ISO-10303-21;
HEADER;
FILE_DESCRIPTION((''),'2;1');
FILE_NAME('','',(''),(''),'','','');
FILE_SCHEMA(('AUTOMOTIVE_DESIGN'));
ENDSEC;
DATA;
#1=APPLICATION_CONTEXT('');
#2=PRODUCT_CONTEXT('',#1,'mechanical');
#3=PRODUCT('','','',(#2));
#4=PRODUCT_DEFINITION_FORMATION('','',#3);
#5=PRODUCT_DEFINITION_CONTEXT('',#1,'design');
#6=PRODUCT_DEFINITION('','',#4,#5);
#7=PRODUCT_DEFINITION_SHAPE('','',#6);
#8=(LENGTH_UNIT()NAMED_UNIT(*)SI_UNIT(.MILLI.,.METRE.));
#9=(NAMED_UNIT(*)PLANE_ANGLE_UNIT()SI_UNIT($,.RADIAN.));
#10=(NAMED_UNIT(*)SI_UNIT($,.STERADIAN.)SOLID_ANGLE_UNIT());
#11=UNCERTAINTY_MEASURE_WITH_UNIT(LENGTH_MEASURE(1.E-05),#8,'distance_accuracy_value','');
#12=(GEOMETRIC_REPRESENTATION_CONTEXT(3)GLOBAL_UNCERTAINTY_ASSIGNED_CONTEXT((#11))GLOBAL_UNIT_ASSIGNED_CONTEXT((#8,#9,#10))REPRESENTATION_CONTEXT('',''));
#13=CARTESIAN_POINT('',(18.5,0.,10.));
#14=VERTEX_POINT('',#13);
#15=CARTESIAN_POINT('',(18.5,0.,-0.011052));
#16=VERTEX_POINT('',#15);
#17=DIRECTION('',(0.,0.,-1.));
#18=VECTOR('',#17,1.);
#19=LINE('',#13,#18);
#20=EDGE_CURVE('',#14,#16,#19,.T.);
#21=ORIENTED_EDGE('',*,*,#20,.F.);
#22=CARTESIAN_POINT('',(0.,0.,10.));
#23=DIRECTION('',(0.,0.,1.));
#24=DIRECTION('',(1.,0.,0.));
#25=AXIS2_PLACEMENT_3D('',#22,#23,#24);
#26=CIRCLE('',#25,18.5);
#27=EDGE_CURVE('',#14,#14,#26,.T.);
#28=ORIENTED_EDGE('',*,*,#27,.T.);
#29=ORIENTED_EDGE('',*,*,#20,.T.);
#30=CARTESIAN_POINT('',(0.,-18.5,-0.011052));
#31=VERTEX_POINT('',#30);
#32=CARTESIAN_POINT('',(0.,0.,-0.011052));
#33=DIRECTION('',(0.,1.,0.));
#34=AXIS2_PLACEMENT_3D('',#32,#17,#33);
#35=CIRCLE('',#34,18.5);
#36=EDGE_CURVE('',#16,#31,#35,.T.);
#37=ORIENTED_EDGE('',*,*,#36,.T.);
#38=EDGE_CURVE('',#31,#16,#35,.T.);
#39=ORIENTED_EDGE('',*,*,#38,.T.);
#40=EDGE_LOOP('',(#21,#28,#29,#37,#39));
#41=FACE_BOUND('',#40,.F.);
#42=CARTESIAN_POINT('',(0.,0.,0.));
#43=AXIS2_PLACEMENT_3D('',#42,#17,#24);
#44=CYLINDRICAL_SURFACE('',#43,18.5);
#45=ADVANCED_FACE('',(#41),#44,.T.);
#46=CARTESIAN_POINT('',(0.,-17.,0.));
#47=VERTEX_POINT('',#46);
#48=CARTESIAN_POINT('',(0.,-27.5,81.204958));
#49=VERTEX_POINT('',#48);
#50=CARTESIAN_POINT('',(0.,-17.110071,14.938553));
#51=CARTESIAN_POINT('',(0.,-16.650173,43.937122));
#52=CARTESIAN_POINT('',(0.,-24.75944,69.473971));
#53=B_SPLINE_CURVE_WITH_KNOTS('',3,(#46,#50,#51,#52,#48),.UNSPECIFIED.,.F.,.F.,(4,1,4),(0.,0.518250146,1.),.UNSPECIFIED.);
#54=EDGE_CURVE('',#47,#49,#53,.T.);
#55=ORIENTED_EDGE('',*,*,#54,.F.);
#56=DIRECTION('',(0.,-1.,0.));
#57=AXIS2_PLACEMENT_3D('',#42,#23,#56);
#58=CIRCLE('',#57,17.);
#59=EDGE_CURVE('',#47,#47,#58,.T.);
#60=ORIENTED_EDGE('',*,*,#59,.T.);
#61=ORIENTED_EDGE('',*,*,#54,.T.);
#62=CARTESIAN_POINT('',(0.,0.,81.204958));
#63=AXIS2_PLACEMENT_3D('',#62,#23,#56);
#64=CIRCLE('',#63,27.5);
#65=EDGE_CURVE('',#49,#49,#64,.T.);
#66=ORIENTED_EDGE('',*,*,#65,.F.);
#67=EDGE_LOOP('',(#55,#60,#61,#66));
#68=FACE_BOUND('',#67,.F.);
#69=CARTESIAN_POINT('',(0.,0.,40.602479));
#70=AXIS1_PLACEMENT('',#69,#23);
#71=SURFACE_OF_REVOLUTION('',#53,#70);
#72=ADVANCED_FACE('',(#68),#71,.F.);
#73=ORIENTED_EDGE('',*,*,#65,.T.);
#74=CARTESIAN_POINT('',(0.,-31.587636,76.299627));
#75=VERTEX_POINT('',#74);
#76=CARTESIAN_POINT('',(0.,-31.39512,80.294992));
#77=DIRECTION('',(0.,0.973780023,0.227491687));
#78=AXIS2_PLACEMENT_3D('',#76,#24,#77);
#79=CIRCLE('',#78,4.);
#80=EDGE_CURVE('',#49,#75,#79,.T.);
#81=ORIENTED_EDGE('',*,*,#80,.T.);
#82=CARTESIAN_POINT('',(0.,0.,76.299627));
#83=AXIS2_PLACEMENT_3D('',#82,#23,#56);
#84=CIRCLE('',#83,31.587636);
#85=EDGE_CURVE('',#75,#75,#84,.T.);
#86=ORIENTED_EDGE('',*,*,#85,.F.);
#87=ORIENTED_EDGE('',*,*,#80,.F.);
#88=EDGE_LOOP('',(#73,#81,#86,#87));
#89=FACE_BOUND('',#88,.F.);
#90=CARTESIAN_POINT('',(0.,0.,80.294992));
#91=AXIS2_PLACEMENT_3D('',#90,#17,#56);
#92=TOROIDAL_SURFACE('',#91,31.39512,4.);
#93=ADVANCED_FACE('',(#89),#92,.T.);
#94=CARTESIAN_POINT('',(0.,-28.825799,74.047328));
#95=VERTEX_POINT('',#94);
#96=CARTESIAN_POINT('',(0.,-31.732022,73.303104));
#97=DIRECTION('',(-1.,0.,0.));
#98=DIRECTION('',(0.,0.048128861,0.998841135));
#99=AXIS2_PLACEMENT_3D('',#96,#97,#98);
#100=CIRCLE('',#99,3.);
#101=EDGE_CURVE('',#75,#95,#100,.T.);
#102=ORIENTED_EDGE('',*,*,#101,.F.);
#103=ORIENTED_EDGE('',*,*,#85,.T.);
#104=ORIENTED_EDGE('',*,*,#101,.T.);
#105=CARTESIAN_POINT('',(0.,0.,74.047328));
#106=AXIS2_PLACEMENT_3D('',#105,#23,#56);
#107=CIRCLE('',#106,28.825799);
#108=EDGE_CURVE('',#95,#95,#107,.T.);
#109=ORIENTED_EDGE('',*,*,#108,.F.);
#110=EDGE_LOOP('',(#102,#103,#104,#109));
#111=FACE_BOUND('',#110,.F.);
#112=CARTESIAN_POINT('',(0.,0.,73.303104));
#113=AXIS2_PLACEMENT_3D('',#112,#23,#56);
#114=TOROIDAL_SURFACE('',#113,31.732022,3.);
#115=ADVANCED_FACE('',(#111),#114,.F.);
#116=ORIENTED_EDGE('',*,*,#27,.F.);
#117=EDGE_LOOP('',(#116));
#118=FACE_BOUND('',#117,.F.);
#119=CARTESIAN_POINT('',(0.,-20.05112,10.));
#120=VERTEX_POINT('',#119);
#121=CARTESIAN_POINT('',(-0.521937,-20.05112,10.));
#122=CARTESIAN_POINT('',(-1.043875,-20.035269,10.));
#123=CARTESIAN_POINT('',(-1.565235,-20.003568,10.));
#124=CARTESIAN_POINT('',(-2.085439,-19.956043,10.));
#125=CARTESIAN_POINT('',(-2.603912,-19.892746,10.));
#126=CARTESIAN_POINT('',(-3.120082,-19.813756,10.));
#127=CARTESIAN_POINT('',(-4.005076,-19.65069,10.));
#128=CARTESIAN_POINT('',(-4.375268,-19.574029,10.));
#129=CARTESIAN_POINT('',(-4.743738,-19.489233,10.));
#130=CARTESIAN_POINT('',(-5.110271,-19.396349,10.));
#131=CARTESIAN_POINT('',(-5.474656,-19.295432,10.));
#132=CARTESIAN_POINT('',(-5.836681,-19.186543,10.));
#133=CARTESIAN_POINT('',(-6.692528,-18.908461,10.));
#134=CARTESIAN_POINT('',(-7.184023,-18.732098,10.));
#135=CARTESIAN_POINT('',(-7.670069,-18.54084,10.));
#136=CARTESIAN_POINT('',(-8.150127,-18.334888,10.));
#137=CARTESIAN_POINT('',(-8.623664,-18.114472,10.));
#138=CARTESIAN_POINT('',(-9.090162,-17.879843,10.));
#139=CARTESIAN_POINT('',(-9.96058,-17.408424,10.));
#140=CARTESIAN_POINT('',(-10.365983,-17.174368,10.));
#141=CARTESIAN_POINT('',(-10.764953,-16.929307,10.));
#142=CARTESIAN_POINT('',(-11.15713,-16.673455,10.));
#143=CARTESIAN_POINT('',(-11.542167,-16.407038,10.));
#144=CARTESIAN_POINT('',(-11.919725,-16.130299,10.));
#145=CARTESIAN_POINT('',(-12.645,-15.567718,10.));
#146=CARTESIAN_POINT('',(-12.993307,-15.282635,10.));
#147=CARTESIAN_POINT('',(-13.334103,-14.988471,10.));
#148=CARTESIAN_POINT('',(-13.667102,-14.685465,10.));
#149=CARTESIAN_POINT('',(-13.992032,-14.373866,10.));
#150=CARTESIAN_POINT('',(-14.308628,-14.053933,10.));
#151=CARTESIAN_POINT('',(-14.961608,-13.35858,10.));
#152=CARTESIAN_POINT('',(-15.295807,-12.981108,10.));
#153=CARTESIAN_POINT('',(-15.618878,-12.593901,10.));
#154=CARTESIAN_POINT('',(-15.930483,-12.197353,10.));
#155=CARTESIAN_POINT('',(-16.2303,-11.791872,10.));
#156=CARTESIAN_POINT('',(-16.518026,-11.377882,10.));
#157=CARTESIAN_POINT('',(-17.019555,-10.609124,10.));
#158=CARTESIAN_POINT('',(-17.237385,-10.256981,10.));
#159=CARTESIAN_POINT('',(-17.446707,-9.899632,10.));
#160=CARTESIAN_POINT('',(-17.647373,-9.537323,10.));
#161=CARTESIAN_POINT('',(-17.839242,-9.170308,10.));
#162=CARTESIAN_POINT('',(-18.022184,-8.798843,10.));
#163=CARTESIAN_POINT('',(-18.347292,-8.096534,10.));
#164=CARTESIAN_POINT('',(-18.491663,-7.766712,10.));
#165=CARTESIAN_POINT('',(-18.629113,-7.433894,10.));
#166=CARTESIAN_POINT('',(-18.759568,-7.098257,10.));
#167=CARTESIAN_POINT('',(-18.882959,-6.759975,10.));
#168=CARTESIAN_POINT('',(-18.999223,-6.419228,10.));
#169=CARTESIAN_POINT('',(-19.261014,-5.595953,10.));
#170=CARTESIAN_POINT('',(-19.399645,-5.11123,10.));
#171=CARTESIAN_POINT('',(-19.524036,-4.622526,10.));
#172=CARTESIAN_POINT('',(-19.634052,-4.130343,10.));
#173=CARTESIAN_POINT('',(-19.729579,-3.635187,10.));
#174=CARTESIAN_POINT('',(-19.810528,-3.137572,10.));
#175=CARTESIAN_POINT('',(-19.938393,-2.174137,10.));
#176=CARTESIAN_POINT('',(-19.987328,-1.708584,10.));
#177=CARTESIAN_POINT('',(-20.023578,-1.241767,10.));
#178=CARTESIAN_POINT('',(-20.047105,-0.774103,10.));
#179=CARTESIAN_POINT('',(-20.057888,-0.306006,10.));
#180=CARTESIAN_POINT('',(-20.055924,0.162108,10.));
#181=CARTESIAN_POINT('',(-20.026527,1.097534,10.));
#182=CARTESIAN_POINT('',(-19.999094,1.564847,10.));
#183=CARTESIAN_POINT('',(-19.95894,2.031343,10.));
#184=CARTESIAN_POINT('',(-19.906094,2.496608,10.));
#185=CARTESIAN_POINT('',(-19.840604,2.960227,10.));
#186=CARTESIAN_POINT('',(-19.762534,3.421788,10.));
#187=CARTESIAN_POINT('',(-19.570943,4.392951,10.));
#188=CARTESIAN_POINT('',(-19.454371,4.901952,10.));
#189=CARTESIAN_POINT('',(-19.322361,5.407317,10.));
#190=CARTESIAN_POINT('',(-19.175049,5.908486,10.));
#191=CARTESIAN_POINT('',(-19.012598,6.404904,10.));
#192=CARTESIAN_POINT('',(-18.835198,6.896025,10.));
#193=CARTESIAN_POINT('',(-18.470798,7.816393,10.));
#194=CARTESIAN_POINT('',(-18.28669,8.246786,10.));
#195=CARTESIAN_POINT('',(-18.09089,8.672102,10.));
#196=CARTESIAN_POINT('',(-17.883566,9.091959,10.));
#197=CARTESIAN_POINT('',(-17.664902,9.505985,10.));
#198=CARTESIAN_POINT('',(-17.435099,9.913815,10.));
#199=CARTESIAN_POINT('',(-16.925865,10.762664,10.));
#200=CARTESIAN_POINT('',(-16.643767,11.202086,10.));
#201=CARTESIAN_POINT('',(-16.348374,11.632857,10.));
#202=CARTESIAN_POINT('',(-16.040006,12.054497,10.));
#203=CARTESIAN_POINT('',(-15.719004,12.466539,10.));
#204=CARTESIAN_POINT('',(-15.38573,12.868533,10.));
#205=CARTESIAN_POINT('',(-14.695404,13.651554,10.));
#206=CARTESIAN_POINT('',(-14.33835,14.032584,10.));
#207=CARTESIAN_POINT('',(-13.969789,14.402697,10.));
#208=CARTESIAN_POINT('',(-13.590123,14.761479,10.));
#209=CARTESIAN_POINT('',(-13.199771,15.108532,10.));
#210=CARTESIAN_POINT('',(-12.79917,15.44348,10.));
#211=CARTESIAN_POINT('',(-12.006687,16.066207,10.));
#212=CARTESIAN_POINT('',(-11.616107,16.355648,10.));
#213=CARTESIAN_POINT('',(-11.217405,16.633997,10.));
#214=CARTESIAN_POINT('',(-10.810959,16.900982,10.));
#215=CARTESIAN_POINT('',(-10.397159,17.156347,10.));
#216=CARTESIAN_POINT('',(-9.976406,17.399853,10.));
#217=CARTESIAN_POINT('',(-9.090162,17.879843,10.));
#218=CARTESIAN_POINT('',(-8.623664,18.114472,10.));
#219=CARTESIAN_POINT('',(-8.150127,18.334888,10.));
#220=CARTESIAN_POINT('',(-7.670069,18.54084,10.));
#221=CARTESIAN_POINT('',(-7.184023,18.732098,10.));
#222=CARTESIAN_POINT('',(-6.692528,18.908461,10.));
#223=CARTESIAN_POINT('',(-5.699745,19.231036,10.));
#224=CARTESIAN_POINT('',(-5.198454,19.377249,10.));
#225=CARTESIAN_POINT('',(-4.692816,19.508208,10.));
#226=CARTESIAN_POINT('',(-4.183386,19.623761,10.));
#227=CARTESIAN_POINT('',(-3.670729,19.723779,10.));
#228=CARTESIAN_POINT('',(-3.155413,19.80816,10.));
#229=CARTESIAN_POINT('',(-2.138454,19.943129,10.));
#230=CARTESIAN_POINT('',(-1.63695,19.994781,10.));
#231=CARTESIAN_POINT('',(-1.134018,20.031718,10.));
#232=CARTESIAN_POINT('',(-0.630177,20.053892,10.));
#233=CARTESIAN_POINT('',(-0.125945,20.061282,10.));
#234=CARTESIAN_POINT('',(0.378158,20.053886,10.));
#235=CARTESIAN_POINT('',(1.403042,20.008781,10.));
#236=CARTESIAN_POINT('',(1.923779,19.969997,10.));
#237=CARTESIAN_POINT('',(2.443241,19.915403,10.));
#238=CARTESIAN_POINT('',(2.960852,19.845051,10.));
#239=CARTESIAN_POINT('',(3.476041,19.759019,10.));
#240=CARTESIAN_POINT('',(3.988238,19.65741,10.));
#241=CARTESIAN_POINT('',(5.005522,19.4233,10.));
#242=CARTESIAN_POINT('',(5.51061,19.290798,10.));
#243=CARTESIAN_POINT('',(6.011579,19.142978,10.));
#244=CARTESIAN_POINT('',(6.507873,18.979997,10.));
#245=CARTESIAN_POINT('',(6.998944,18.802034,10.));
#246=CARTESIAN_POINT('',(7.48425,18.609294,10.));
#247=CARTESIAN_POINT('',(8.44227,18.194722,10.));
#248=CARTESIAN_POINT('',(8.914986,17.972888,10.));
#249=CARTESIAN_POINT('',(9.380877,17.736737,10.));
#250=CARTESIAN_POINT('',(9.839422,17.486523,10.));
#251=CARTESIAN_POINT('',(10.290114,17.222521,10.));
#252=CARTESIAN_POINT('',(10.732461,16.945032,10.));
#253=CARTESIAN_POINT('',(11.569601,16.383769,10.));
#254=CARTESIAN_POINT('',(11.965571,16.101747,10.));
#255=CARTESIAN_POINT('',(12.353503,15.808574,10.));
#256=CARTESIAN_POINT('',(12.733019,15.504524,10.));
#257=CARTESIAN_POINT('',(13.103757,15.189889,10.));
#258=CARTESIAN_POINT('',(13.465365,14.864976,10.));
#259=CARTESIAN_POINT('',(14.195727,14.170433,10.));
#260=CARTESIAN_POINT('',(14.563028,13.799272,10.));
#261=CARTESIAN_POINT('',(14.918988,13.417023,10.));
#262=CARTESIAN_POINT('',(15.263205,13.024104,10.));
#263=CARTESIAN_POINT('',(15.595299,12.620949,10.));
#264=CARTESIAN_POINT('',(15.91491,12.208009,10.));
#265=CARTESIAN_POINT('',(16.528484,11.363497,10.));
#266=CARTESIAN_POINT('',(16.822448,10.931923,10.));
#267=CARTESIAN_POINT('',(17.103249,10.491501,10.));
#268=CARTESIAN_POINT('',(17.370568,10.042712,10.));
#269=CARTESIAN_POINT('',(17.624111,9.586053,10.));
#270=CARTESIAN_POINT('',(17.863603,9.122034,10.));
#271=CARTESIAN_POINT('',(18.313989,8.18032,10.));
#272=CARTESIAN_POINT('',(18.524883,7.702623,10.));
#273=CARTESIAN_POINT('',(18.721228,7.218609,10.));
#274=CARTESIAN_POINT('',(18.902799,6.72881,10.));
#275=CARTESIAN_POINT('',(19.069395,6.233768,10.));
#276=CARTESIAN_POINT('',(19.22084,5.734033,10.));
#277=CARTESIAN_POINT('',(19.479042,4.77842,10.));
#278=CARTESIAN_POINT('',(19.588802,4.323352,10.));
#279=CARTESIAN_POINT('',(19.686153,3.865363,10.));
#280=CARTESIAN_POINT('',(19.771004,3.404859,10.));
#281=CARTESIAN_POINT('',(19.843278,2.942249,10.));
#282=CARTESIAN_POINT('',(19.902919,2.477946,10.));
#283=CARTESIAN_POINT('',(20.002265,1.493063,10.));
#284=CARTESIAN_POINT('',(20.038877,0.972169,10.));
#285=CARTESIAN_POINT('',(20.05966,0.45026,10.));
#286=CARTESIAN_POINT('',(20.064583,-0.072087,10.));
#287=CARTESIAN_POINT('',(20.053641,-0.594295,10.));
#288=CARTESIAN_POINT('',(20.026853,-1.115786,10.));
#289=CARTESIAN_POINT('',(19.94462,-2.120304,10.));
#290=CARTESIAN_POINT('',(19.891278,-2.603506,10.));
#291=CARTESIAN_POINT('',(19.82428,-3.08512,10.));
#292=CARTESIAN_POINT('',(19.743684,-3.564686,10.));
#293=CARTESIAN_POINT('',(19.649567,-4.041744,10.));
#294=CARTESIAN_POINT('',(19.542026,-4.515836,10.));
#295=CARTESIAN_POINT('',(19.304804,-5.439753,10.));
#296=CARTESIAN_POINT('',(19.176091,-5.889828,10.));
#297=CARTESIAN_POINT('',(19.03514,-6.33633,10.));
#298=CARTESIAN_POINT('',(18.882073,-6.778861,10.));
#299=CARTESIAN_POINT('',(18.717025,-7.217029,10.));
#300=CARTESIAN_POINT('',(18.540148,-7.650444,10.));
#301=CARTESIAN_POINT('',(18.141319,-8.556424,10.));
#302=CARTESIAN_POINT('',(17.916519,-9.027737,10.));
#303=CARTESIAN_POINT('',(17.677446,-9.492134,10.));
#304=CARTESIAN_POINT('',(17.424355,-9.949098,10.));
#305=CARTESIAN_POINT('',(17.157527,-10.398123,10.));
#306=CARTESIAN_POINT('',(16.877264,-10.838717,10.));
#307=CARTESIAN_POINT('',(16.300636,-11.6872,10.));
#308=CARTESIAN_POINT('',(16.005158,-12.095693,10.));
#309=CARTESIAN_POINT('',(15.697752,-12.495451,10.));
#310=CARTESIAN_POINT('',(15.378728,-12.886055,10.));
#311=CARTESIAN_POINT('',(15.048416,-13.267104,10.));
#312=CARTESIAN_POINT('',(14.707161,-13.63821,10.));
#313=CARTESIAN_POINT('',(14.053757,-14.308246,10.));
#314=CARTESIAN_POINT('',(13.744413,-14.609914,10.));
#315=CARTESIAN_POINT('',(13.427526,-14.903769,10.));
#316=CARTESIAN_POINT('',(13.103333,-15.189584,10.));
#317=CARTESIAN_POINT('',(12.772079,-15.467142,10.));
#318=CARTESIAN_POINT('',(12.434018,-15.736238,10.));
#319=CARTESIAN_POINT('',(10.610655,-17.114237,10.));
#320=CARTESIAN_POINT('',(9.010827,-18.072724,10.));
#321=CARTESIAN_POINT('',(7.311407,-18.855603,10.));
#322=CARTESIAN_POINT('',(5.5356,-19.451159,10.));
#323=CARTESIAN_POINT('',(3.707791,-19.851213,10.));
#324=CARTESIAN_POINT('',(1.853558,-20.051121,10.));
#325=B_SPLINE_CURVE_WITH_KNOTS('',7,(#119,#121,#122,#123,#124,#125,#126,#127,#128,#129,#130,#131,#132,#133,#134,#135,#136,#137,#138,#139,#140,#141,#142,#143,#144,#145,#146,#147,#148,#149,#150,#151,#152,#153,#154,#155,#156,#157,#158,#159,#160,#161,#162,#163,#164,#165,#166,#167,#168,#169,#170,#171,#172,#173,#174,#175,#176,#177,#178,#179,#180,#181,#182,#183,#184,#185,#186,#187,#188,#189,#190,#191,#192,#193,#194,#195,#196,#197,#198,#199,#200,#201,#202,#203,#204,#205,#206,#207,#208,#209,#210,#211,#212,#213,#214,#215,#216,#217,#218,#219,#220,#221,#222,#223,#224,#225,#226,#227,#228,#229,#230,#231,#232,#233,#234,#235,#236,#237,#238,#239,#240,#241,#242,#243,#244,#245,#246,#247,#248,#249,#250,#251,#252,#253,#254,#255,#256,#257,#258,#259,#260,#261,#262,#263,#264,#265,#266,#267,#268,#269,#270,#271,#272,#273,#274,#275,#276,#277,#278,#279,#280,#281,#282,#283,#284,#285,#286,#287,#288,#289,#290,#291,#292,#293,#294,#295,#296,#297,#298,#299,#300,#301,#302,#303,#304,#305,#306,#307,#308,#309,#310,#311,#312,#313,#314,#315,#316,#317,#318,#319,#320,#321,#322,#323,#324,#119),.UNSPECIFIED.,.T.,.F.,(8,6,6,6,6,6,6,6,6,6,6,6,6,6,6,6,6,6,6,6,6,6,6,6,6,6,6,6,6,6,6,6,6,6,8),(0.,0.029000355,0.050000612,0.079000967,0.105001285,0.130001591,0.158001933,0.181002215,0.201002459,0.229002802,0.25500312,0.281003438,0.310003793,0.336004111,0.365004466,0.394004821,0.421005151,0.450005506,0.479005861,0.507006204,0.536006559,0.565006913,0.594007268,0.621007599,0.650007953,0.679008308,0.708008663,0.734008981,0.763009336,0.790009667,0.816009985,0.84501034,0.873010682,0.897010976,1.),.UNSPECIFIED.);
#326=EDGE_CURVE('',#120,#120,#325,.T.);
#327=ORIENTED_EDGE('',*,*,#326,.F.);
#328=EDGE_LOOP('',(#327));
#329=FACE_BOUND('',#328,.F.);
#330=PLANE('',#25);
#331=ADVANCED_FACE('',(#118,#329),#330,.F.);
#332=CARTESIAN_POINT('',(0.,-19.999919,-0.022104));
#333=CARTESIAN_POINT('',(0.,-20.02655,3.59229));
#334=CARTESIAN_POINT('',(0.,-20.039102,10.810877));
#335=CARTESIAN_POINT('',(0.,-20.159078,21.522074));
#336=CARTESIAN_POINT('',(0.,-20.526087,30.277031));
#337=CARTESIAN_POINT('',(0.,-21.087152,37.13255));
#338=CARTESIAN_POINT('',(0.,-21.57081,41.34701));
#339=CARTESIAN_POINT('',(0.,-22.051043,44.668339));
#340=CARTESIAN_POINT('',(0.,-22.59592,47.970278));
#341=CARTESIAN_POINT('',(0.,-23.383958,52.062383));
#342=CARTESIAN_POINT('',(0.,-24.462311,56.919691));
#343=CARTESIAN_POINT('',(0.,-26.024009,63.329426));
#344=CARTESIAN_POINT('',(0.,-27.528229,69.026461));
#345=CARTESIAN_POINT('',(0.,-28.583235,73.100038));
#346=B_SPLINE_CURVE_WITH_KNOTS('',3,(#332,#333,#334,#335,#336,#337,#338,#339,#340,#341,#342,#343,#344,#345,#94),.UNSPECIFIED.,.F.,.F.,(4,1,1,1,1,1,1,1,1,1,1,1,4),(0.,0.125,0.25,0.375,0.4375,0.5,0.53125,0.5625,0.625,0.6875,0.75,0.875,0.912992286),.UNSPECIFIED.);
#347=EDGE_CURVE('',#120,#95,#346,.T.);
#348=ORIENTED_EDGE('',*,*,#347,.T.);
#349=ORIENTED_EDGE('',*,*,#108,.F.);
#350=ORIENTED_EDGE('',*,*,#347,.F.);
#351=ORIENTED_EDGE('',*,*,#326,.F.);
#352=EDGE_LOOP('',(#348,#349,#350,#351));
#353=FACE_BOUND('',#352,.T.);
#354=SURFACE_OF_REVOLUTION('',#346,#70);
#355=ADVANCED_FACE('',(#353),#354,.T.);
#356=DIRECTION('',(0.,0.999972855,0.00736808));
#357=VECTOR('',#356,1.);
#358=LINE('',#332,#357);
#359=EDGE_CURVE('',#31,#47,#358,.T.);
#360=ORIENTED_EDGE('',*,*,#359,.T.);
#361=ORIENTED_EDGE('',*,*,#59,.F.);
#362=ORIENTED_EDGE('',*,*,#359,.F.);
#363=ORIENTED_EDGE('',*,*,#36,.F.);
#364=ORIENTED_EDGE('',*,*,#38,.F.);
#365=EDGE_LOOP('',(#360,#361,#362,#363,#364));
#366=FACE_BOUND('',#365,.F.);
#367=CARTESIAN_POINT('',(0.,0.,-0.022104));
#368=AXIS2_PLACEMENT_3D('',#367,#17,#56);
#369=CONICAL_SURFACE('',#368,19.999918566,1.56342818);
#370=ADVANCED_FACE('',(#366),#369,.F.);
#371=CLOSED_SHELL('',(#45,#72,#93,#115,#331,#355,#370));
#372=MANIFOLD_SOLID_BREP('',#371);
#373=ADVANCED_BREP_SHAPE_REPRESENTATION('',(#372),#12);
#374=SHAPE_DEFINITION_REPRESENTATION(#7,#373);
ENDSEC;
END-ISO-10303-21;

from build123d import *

# Parameters (mm, degrees)
F2_R     = 22.5
F2_R_2   = 18.5
F3_DEPTH = 10


# Not quite as in the source:
# - ends of sketch curves that miss each other by under 0.0002 mm in the source are joined
# - the dataset's text gives a spline's control points without its knots; the knots are read off the source's solid


with BuildPart() as f1:
    # F0 (on Right) → F1 (revolve)
    with BuildSketch(Plane.YZ):
        with BuildLine():
            Line((-19.999918566, -0.0221042413), (-17, 0))
            add(Edge.make_bspline(
                [(-17, 0), (-17.1100714453, 14.9385526751), (-16.6501725085, 43.9371220907), (-24.7594404053, 69.4739705275), (-27.5, 81.2049582601)],
                knots=[0, 0, 0, 0, 0.5182501459, 1, 1, 1, 1], degree=3))
            ThreePointArc((-27.5, 81.2049582601), (-34.4680485067, 82.8556771544), (-31.5876355337, 76.2996269742))
            ThreePointArc((-31.5876355337, 76.2996269742), (-29.8360350078, 75.6280192423), (-28.8257994316, 74.0473278023))
            add(Edge.make_bspline(
                [(-19.999918566, -0.0221042413), (-20.0265504384, 3.5922902833), (-20.0391016699, 10.8108769326), (-20.1590781414, 21.5220738722), (-20.5260867717, 30.2770305254), (-21.0871523738, 37.1325499921), (-21.5708100593, 41.3470099171), (-22.0510428697, 44.6683392237), (-22.5959202299, 47.9702777058), (-23.3839580199, 52.0623829172), (-24.4623113385, 56.9196909992), (-26.0240091098, 63.3294255046), (-27.5282289103, 69.0264613417), (-28.5832353261, 73.1000377108), (-28.8257994316, 74.0473278023)],
                knots=[0, 0, 0, 0, 0.125, 0.25, 0.375, 0.4375, 0.5, 0.53125, 0.5625, 0.625, 0.6875, 0.75, 0.875, 0.9129922864, 0.9129922864, 0.9129922864, 0.9129922864], degree=3))
        make_face()
    revolve(axis=Axis((0, 0, 40.60247913), (0, 0, 1)))

    # F2 (on Top) → F3 (cut, symmetric)
    with BuildSketch(Plane.XY):
        Circle(F2_R)
        Circle(F2_R_2, mode=Mode.SUBTRACT)
    extrude(amount=F3_DEPTH, both=True, mode=Mode.SUBTRACT)


solid = f1.part
